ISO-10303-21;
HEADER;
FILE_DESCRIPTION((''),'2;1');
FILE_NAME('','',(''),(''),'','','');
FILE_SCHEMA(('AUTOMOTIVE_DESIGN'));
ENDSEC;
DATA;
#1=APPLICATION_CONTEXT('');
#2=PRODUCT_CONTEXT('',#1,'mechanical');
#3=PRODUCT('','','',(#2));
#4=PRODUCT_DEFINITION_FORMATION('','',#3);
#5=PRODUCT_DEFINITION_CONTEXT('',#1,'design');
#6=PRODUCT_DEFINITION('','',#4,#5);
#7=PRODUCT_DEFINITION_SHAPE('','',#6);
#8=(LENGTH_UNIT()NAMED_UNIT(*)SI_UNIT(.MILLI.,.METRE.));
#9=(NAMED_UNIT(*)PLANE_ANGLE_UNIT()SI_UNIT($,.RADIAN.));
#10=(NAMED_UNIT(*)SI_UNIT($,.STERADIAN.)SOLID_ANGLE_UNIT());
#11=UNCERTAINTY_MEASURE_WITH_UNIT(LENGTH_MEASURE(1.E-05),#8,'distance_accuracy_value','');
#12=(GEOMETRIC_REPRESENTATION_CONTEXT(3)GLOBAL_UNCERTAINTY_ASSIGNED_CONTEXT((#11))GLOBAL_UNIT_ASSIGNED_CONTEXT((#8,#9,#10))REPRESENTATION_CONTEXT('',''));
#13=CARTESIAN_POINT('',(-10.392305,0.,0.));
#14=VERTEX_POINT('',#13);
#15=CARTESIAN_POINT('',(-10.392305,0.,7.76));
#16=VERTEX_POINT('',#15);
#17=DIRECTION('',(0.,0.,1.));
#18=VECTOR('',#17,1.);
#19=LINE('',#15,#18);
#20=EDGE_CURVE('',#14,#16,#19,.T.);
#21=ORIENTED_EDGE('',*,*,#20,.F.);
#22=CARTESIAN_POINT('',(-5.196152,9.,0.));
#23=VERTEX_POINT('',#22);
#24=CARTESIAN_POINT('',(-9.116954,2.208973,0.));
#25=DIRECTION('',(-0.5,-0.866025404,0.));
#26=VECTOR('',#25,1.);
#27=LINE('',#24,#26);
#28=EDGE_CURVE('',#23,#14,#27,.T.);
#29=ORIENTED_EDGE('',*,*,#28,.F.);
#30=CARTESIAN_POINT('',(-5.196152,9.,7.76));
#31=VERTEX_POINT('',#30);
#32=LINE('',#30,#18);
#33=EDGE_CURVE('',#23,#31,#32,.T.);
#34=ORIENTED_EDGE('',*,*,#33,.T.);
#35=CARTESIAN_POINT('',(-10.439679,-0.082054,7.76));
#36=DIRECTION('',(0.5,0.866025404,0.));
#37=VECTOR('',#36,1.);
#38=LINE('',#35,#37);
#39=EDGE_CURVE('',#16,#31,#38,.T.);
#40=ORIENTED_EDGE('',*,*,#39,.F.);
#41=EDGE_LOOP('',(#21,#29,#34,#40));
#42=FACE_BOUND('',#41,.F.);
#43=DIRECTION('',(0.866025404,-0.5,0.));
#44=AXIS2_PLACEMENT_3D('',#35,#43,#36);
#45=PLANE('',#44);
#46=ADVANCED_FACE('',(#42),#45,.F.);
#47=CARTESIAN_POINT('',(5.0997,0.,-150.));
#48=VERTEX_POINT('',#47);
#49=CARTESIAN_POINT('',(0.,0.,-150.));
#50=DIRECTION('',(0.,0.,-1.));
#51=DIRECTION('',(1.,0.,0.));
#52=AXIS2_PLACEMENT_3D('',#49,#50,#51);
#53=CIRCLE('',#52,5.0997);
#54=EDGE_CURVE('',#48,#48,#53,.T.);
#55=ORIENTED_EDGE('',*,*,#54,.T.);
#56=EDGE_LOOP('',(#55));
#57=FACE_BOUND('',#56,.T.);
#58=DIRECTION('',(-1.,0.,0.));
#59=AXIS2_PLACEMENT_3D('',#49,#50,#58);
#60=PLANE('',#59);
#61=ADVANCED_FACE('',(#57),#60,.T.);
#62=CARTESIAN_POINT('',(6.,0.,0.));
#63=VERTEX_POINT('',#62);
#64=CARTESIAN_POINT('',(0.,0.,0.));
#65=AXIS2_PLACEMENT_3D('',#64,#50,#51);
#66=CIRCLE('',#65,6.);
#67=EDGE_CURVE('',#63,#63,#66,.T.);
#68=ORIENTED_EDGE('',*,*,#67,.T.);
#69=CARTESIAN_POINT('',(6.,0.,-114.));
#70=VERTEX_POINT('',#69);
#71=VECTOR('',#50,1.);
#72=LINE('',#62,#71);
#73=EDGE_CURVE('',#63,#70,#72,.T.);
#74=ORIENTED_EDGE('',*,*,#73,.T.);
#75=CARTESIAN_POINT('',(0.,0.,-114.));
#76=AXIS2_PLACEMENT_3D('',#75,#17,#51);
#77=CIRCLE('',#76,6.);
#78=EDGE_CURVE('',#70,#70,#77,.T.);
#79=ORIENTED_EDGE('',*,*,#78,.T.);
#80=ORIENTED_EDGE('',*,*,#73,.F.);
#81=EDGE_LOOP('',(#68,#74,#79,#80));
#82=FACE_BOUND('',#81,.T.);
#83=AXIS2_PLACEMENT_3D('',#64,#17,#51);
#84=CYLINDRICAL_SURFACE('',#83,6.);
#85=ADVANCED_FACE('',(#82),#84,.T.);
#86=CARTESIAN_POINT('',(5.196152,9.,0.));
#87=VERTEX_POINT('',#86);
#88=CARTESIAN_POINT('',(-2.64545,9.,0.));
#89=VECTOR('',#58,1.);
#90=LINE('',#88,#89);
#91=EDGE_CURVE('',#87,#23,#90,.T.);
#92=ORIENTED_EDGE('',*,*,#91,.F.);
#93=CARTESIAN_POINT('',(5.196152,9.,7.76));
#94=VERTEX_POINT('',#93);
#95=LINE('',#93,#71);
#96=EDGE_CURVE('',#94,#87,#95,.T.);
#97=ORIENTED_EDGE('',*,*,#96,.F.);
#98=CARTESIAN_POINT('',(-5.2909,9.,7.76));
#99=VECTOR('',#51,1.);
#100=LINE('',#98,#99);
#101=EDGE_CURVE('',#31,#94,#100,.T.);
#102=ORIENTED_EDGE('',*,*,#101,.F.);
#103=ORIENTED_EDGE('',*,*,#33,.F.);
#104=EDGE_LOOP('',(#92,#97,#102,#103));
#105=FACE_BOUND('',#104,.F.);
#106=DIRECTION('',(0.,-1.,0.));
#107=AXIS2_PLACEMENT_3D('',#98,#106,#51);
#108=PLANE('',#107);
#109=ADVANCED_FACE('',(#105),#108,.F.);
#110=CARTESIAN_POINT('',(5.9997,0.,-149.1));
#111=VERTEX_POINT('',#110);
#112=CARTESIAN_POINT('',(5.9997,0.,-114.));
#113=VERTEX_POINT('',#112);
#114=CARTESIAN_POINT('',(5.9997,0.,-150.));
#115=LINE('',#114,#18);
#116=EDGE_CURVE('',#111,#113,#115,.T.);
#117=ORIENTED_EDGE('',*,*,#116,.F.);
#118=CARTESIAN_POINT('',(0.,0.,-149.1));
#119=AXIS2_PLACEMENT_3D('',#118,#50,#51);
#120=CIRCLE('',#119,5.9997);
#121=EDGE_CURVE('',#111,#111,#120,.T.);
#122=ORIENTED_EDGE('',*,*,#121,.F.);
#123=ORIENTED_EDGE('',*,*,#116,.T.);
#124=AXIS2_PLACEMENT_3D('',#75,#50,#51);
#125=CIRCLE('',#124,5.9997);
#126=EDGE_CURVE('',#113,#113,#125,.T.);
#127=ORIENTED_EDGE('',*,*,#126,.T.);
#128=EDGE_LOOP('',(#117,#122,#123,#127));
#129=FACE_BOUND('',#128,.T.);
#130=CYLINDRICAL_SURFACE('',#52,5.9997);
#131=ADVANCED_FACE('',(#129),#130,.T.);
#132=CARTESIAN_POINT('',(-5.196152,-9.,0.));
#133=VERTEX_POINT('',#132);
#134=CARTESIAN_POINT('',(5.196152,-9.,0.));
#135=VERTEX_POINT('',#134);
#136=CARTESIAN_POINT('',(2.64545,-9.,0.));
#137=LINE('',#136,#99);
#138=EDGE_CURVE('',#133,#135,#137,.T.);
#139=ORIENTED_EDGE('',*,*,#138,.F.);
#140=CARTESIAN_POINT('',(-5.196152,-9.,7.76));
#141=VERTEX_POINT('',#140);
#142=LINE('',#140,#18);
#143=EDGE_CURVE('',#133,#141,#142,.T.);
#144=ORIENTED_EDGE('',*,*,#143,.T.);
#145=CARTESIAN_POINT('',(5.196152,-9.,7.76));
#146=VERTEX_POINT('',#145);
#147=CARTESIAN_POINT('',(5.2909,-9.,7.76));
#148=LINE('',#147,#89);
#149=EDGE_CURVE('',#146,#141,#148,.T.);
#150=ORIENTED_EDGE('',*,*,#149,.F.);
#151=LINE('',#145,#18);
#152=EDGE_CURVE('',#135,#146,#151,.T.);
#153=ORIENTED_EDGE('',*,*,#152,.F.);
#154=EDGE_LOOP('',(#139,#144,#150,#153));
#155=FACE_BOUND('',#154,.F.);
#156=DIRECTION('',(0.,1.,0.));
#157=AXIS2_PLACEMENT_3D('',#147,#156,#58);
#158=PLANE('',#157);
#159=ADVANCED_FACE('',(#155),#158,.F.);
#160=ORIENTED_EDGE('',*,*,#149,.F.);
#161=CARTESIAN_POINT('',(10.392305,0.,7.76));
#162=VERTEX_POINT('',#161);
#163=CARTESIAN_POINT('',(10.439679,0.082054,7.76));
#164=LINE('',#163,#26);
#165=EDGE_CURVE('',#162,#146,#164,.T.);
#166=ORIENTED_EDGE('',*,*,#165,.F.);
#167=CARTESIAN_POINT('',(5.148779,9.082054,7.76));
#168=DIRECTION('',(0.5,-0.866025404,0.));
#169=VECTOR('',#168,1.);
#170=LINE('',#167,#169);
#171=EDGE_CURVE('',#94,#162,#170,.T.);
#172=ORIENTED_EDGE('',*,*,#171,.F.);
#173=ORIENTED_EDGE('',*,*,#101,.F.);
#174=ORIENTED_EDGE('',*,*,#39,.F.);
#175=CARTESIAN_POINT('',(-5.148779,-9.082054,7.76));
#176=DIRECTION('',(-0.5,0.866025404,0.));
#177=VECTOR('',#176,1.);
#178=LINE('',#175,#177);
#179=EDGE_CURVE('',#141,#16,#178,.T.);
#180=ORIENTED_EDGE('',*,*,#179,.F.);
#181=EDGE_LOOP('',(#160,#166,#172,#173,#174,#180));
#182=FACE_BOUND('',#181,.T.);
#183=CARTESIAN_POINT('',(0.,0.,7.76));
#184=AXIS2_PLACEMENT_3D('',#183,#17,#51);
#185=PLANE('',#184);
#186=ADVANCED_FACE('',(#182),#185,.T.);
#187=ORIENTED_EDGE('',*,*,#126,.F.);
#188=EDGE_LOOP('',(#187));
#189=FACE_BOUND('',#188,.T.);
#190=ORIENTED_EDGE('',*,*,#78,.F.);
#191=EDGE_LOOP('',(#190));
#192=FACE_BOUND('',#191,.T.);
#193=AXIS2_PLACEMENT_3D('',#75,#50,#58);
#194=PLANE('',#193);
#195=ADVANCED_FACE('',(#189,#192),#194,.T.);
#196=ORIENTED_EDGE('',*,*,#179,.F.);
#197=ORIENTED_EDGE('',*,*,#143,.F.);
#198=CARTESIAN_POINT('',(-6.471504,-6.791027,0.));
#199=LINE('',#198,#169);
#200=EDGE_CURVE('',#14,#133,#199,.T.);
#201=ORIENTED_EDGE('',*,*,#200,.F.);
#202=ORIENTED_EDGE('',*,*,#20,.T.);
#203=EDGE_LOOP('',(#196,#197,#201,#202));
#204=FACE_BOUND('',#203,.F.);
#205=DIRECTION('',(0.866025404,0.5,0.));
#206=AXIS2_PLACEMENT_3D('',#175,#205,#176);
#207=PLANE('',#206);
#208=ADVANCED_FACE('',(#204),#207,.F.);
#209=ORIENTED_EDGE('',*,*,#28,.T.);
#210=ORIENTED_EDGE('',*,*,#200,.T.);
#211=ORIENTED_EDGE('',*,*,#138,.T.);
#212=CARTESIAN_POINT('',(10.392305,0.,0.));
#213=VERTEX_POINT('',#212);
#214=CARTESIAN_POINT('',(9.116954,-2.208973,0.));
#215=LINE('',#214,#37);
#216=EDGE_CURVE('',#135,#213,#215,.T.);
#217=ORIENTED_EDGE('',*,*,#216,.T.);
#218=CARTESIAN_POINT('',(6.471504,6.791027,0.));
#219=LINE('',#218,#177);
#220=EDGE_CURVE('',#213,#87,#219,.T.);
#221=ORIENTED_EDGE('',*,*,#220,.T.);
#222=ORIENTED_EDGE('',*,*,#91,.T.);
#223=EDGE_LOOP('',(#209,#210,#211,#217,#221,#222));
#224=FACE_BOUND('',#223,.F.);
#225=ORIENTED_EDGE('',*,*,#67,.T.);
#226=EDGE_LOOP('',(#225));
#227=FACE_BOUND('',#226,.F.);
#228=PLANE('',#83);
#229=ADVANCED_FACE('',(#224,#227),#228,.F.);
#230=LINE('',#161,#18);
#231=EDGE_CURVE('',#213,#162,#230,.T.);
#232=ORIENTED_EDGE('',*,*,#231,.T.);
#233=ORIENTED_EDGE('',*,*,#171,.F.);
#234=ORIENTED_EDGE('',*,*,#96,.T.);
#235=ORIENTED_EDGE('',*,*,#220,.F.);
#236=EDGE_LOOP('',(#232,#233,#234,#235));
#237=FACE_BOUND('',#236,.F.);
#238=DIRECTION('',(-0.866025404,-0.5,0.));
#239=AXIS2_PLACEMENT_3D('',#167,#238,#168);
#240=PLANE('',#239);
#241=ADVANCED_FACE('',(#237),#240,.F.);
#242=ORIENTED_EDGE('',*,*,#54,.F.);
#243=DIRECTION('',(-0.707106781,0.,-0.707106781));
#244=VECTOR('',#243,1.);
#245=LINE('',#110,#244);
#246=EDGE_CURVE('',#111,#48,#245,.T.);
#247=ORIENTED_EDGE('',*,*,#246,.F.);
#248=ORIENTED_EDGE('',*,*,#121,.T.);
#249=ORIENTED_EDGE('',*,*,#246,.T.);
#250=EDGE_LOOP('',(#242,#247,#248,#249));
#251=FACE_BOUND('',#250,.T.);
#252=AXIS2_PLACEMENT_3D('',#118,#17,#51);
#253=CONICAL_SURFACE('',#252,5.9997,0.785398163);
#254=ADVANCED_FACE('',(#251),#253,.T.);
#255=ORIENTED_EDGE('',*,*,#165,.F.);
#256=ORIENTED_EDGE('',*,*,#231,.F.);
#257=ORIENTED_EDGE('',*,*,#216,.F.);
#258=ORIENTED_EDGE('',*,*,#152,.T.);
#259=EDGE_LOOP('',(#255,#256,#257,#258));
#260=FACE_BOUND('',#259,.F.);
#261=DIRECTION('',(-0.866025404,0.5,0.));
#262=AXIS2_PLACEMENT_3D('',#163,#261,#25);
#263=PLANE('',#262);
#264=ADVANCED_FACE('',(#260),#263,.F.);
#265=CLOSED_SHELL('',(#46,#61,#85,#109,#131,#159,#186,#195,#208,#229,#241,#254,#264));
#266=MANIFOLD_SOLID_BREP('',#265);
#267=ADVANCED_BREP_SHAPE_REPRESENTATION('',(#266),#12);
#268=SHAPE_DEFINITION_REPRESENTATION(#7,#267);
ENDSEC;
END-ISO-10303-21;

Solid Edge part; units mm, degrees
sketch "Sketch1" plane through (0, 0, 0) normal (0, 0, 1) x (1, 0, 0)
  circle A0 centre (0, 0) radius 10.44
  dimension "D1" = 20.88
extrude "Protrusion1" add sketch "Sketch1" along normal blind 7.76
sketch "Sketch2" plane through (0, 0, 0) normal (0, 0, -1) x (1, 0, 0)
  circle A0 centre (0, 0) radius 6
extrude "Protrusion2" add sketch "Sketch2" along normal blind 150
sketch "Sketch3" plane through (0, 0, -150) normal (0, 0, -1) x (1, 0, 0)
  circle A0 centre (0, 0) radius 5.9997
extrude "Cutout1" cut sketch "Sketch3" against normal blind 36 flip side to cut
chamfer "Chamfer_1" distance 0.9 angle 45 1 edges at (-5.9997, 0, -150)
sketch "Sketch4" plane through (0, 0, 7.76) normal (0, 0, 1) x (1, 0, 0)
  line L0 (-5.2909, 9) -> (5.2909, 9)
  dimension "D1" = 18
extrude "Cutout2" cut sketch "Sketch4" against normal up to next material side at (0, 9.05, 7.76)
pattern_circular "Pattern1" count 6 over 360 about axis through (0, 0, 7.76) along (0, 0, 1) of "Cutout2"
properties part number "24104515"
